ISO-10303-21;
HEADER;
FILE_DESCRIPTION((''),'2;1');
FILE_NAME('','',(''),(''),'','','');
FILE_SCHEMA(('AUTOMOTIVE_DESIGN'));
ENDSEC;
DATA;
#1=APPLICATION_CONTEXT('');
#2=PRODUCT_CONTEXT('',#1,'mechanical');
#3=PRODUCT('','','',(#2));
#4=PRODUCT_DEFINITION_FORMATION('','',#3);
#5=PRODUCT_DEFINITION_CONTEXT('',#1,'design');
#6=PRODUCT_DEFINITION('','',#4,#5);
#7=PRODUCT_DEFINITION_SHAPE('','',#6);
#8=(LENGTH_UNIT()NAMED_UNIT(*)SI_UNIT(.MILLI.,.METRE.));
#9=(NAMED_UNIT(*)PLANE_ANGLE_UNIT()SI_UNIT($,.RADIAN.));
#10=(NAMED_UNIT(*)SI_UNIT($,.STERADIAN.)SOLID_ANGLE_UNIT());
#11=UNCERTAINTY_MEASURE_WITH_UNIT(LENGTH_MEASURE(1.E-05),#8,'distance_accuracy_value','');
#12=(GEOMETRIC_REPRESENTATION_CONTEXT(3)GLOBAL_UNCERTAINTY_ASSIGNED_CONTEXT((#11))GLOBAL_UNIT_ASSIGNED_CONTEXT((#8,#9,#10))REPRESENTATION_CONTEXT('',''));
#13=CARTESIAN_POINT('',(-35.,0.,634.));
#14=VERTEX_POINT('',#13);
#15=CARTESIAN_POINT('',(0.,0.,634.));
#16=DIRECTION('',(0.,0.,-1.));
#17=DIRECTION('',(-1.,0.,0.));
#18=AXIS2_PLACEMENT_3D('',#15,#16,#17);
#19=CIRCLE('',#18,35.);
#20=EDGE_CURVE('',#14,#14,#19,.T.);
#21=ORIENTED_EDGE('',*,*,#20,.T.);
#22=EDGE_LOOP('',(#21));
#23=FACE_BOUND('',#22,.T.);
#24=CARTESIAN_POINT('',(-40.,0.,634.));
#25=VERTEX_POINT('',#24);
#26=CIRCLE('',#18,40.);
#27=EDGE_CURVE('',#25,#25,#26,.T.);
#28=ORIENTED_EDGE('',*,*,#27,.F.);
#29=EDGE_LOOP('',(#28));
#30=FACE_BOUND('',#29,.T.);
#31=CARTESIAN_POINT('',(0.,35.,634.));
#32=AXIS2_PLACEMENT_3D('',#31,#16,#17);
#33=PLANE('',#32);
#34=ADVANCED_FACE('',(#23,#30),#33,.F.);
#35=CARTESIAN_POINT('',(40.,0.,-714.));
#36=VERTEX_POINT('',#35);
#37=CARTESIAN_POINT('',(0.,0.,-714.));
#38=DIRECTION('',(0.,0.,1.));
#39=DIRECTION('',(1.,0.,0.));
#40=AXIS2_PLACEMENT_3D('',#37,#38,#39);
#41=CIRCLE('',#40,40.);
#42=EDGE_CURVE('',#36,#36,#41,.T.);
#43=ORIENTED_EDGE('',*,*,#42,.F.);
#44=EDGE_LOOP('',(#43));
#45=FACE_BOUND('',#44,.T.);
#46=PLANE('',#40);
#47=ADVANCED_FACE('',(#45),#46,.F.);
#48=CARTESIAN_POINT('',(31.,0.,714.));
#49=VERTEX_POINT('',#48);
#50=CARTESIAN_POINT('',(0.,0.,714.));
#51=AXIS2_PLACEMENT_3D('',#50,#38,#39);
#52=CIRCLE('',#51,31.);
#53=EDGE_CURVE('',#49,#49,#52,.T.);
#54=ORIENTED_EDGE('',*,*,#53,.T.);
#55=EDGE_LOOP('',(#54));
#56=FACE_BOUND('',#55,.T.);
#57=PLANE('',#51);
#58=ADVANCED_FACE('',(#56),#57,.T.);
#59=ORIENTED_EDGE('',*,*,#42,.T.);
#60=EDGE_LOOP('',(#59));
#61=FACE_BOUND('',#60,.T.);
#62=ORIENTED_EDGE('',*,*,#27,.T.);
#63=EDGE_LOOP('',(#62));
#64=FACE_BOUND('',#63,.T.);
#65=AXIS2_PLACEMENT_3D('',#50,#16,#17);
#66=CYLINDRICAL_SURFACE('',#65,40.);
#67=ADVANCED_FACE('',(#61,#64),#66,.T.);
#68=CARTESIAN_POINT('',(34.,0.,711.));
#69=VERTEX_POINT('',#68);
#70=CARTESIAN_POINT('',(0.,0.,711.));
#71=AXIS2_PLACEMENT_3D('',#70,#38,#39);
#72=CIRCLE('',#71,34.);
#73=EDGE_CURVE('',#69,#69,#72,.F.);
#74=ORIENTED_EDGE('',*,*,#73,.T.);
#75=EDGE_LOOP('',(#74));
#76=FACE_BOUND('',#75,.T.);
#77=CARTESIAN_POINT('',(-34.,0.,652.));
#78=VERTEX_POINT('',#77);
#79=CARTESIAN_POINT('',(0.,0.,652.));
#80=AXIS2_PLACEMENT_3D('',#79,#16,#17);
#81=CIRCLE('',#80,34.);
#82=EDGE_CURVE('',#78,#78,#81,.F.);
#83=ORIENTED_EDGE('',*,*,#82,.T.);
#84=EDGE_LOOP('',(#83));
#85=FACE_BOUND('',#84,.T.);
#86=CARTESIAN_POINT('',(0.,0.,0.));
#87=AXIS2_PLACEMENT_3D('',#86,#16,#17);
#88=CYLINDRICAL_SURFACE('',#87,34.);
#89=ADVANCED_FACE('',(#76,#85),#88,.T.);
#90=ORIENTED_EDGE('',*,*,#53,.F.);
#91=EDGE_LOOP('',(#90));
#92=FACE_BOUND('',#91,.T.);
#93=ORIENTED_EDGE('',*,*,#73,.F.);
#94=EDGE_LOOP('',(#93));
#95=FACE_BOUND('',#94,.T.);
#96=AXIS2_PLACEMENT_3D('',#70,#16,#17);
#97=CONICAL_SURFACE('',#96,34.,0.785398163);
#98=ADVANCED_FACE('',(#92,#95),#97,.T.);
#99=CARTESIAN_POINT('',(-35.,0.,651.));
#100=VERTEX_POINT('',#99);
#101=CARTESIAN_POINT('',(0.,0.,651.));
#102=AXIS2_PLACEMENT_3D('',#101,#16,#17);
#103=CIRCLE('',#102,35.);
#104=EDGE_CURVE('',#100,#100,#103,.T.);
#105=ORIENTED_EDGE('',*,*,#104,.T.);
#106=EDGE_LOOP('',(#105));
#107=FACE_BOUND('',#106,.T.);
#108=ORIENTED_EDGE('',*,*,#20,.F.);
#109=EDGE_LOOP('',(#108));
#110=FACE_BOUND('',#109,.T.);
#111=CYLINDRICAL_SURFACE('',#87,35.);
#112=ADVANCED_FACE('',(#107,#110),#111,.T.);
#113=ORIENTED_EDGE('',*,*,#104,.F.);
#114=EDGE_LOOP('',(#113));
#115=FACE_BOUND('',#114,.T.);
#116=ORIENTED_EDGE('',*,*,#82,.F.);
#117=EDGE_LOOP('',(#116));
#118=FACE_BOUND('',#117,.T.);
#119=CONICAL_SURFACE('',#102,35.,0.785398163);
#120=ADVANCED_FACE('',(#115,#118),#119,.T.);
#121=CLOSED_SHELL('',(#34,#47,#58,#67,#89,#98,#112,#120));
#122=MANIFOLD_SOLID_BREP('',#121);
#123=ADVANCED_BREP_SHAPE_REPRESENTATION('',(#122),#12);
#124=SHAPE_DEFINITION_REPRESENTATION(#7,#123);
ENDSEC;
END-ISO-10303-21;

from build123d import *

# Parameters (mm, degrees)
SKETCH1_R           = 40
BOSS_EXTRUDE1_DEPTH = 714
CHAMFER1_SIZE       = 3


with BuildPart() as part:
    # Sketch1 → Boss-Extrude1 (new, symmetric)
    with BuildSketch(Plane.XY):
        Circle(SKETCH1_R)
    extrude(amount=BOSS_EXTRUDE1_DEPTH, both=True)

    # Sketch2 → Cut-Revolve1 (revolve, cut)
    with BuildSketch(Plane(origin=(0, 0, 0), x_dir=(0, 0, -1), z_dir=(1, 0, 0)), mode=Mode.PRIVATE) as cut_revolve1_sk:
        Polygon((-714, 34), (-654, 34), (-654, 35), (-634, 35), (-634, 52.852263241), (-714, 52.852263241), align=None)
    revolve(cut_revolve1_sk.sketch.rotate(Axis((0, 0, 0), (0, 0, 1)), 90), axis=Axis((0, 0, 0), (0, 0, 1)), mode=Mode.SUBTRACT)

    # Chamfer1
    # the kernel refuses this chamfer: 3 mm, written as the material it takes off along each edge
    with BuildSketch(Plane(origin=(0, 0, 654), x_dir=(-1, 0, 0), z_dir=(0, 1, 0))) as chamfer1_piece_1_section:
        Polygon((35, -CHAMFER1_SIZE), (35 - CHAMFER1_SIZE, 0), (35, 0), align=None)
    chamfer1_piece_1 = revolve(axis=Axis((0, 0, 654), (0, 0, 1)), mode=Mode.PRIVATE)
    chamfer1_piece_1 = chamfer1_piece_1 - Plane(origin=(0, 0, 651.51733658), x_dir=(-1, 0, 0), z_dir=(0, 0, -1)) * Cylinder(34, 140, mode=Mode.PRIVATE)
    add(chamfer1_piece_1, mode=Mode.SUBTRACT)
    with BuildSketch(Plane(origin=(0, 0, 714), x_dir=(-1, 0, 0), z_dir=(0, 1, 0))) as chamfer1_piece_2:
        Polygon((34, -CHAMFER1_SIZE), (34 - CHAMFER1_SIZE, 0), (34, 0), align=None)
    revolve(axis=Axis((0, 0, 714), (0, 0, 1)), mode=Mode.SUBTRACT)


solid = part.part
